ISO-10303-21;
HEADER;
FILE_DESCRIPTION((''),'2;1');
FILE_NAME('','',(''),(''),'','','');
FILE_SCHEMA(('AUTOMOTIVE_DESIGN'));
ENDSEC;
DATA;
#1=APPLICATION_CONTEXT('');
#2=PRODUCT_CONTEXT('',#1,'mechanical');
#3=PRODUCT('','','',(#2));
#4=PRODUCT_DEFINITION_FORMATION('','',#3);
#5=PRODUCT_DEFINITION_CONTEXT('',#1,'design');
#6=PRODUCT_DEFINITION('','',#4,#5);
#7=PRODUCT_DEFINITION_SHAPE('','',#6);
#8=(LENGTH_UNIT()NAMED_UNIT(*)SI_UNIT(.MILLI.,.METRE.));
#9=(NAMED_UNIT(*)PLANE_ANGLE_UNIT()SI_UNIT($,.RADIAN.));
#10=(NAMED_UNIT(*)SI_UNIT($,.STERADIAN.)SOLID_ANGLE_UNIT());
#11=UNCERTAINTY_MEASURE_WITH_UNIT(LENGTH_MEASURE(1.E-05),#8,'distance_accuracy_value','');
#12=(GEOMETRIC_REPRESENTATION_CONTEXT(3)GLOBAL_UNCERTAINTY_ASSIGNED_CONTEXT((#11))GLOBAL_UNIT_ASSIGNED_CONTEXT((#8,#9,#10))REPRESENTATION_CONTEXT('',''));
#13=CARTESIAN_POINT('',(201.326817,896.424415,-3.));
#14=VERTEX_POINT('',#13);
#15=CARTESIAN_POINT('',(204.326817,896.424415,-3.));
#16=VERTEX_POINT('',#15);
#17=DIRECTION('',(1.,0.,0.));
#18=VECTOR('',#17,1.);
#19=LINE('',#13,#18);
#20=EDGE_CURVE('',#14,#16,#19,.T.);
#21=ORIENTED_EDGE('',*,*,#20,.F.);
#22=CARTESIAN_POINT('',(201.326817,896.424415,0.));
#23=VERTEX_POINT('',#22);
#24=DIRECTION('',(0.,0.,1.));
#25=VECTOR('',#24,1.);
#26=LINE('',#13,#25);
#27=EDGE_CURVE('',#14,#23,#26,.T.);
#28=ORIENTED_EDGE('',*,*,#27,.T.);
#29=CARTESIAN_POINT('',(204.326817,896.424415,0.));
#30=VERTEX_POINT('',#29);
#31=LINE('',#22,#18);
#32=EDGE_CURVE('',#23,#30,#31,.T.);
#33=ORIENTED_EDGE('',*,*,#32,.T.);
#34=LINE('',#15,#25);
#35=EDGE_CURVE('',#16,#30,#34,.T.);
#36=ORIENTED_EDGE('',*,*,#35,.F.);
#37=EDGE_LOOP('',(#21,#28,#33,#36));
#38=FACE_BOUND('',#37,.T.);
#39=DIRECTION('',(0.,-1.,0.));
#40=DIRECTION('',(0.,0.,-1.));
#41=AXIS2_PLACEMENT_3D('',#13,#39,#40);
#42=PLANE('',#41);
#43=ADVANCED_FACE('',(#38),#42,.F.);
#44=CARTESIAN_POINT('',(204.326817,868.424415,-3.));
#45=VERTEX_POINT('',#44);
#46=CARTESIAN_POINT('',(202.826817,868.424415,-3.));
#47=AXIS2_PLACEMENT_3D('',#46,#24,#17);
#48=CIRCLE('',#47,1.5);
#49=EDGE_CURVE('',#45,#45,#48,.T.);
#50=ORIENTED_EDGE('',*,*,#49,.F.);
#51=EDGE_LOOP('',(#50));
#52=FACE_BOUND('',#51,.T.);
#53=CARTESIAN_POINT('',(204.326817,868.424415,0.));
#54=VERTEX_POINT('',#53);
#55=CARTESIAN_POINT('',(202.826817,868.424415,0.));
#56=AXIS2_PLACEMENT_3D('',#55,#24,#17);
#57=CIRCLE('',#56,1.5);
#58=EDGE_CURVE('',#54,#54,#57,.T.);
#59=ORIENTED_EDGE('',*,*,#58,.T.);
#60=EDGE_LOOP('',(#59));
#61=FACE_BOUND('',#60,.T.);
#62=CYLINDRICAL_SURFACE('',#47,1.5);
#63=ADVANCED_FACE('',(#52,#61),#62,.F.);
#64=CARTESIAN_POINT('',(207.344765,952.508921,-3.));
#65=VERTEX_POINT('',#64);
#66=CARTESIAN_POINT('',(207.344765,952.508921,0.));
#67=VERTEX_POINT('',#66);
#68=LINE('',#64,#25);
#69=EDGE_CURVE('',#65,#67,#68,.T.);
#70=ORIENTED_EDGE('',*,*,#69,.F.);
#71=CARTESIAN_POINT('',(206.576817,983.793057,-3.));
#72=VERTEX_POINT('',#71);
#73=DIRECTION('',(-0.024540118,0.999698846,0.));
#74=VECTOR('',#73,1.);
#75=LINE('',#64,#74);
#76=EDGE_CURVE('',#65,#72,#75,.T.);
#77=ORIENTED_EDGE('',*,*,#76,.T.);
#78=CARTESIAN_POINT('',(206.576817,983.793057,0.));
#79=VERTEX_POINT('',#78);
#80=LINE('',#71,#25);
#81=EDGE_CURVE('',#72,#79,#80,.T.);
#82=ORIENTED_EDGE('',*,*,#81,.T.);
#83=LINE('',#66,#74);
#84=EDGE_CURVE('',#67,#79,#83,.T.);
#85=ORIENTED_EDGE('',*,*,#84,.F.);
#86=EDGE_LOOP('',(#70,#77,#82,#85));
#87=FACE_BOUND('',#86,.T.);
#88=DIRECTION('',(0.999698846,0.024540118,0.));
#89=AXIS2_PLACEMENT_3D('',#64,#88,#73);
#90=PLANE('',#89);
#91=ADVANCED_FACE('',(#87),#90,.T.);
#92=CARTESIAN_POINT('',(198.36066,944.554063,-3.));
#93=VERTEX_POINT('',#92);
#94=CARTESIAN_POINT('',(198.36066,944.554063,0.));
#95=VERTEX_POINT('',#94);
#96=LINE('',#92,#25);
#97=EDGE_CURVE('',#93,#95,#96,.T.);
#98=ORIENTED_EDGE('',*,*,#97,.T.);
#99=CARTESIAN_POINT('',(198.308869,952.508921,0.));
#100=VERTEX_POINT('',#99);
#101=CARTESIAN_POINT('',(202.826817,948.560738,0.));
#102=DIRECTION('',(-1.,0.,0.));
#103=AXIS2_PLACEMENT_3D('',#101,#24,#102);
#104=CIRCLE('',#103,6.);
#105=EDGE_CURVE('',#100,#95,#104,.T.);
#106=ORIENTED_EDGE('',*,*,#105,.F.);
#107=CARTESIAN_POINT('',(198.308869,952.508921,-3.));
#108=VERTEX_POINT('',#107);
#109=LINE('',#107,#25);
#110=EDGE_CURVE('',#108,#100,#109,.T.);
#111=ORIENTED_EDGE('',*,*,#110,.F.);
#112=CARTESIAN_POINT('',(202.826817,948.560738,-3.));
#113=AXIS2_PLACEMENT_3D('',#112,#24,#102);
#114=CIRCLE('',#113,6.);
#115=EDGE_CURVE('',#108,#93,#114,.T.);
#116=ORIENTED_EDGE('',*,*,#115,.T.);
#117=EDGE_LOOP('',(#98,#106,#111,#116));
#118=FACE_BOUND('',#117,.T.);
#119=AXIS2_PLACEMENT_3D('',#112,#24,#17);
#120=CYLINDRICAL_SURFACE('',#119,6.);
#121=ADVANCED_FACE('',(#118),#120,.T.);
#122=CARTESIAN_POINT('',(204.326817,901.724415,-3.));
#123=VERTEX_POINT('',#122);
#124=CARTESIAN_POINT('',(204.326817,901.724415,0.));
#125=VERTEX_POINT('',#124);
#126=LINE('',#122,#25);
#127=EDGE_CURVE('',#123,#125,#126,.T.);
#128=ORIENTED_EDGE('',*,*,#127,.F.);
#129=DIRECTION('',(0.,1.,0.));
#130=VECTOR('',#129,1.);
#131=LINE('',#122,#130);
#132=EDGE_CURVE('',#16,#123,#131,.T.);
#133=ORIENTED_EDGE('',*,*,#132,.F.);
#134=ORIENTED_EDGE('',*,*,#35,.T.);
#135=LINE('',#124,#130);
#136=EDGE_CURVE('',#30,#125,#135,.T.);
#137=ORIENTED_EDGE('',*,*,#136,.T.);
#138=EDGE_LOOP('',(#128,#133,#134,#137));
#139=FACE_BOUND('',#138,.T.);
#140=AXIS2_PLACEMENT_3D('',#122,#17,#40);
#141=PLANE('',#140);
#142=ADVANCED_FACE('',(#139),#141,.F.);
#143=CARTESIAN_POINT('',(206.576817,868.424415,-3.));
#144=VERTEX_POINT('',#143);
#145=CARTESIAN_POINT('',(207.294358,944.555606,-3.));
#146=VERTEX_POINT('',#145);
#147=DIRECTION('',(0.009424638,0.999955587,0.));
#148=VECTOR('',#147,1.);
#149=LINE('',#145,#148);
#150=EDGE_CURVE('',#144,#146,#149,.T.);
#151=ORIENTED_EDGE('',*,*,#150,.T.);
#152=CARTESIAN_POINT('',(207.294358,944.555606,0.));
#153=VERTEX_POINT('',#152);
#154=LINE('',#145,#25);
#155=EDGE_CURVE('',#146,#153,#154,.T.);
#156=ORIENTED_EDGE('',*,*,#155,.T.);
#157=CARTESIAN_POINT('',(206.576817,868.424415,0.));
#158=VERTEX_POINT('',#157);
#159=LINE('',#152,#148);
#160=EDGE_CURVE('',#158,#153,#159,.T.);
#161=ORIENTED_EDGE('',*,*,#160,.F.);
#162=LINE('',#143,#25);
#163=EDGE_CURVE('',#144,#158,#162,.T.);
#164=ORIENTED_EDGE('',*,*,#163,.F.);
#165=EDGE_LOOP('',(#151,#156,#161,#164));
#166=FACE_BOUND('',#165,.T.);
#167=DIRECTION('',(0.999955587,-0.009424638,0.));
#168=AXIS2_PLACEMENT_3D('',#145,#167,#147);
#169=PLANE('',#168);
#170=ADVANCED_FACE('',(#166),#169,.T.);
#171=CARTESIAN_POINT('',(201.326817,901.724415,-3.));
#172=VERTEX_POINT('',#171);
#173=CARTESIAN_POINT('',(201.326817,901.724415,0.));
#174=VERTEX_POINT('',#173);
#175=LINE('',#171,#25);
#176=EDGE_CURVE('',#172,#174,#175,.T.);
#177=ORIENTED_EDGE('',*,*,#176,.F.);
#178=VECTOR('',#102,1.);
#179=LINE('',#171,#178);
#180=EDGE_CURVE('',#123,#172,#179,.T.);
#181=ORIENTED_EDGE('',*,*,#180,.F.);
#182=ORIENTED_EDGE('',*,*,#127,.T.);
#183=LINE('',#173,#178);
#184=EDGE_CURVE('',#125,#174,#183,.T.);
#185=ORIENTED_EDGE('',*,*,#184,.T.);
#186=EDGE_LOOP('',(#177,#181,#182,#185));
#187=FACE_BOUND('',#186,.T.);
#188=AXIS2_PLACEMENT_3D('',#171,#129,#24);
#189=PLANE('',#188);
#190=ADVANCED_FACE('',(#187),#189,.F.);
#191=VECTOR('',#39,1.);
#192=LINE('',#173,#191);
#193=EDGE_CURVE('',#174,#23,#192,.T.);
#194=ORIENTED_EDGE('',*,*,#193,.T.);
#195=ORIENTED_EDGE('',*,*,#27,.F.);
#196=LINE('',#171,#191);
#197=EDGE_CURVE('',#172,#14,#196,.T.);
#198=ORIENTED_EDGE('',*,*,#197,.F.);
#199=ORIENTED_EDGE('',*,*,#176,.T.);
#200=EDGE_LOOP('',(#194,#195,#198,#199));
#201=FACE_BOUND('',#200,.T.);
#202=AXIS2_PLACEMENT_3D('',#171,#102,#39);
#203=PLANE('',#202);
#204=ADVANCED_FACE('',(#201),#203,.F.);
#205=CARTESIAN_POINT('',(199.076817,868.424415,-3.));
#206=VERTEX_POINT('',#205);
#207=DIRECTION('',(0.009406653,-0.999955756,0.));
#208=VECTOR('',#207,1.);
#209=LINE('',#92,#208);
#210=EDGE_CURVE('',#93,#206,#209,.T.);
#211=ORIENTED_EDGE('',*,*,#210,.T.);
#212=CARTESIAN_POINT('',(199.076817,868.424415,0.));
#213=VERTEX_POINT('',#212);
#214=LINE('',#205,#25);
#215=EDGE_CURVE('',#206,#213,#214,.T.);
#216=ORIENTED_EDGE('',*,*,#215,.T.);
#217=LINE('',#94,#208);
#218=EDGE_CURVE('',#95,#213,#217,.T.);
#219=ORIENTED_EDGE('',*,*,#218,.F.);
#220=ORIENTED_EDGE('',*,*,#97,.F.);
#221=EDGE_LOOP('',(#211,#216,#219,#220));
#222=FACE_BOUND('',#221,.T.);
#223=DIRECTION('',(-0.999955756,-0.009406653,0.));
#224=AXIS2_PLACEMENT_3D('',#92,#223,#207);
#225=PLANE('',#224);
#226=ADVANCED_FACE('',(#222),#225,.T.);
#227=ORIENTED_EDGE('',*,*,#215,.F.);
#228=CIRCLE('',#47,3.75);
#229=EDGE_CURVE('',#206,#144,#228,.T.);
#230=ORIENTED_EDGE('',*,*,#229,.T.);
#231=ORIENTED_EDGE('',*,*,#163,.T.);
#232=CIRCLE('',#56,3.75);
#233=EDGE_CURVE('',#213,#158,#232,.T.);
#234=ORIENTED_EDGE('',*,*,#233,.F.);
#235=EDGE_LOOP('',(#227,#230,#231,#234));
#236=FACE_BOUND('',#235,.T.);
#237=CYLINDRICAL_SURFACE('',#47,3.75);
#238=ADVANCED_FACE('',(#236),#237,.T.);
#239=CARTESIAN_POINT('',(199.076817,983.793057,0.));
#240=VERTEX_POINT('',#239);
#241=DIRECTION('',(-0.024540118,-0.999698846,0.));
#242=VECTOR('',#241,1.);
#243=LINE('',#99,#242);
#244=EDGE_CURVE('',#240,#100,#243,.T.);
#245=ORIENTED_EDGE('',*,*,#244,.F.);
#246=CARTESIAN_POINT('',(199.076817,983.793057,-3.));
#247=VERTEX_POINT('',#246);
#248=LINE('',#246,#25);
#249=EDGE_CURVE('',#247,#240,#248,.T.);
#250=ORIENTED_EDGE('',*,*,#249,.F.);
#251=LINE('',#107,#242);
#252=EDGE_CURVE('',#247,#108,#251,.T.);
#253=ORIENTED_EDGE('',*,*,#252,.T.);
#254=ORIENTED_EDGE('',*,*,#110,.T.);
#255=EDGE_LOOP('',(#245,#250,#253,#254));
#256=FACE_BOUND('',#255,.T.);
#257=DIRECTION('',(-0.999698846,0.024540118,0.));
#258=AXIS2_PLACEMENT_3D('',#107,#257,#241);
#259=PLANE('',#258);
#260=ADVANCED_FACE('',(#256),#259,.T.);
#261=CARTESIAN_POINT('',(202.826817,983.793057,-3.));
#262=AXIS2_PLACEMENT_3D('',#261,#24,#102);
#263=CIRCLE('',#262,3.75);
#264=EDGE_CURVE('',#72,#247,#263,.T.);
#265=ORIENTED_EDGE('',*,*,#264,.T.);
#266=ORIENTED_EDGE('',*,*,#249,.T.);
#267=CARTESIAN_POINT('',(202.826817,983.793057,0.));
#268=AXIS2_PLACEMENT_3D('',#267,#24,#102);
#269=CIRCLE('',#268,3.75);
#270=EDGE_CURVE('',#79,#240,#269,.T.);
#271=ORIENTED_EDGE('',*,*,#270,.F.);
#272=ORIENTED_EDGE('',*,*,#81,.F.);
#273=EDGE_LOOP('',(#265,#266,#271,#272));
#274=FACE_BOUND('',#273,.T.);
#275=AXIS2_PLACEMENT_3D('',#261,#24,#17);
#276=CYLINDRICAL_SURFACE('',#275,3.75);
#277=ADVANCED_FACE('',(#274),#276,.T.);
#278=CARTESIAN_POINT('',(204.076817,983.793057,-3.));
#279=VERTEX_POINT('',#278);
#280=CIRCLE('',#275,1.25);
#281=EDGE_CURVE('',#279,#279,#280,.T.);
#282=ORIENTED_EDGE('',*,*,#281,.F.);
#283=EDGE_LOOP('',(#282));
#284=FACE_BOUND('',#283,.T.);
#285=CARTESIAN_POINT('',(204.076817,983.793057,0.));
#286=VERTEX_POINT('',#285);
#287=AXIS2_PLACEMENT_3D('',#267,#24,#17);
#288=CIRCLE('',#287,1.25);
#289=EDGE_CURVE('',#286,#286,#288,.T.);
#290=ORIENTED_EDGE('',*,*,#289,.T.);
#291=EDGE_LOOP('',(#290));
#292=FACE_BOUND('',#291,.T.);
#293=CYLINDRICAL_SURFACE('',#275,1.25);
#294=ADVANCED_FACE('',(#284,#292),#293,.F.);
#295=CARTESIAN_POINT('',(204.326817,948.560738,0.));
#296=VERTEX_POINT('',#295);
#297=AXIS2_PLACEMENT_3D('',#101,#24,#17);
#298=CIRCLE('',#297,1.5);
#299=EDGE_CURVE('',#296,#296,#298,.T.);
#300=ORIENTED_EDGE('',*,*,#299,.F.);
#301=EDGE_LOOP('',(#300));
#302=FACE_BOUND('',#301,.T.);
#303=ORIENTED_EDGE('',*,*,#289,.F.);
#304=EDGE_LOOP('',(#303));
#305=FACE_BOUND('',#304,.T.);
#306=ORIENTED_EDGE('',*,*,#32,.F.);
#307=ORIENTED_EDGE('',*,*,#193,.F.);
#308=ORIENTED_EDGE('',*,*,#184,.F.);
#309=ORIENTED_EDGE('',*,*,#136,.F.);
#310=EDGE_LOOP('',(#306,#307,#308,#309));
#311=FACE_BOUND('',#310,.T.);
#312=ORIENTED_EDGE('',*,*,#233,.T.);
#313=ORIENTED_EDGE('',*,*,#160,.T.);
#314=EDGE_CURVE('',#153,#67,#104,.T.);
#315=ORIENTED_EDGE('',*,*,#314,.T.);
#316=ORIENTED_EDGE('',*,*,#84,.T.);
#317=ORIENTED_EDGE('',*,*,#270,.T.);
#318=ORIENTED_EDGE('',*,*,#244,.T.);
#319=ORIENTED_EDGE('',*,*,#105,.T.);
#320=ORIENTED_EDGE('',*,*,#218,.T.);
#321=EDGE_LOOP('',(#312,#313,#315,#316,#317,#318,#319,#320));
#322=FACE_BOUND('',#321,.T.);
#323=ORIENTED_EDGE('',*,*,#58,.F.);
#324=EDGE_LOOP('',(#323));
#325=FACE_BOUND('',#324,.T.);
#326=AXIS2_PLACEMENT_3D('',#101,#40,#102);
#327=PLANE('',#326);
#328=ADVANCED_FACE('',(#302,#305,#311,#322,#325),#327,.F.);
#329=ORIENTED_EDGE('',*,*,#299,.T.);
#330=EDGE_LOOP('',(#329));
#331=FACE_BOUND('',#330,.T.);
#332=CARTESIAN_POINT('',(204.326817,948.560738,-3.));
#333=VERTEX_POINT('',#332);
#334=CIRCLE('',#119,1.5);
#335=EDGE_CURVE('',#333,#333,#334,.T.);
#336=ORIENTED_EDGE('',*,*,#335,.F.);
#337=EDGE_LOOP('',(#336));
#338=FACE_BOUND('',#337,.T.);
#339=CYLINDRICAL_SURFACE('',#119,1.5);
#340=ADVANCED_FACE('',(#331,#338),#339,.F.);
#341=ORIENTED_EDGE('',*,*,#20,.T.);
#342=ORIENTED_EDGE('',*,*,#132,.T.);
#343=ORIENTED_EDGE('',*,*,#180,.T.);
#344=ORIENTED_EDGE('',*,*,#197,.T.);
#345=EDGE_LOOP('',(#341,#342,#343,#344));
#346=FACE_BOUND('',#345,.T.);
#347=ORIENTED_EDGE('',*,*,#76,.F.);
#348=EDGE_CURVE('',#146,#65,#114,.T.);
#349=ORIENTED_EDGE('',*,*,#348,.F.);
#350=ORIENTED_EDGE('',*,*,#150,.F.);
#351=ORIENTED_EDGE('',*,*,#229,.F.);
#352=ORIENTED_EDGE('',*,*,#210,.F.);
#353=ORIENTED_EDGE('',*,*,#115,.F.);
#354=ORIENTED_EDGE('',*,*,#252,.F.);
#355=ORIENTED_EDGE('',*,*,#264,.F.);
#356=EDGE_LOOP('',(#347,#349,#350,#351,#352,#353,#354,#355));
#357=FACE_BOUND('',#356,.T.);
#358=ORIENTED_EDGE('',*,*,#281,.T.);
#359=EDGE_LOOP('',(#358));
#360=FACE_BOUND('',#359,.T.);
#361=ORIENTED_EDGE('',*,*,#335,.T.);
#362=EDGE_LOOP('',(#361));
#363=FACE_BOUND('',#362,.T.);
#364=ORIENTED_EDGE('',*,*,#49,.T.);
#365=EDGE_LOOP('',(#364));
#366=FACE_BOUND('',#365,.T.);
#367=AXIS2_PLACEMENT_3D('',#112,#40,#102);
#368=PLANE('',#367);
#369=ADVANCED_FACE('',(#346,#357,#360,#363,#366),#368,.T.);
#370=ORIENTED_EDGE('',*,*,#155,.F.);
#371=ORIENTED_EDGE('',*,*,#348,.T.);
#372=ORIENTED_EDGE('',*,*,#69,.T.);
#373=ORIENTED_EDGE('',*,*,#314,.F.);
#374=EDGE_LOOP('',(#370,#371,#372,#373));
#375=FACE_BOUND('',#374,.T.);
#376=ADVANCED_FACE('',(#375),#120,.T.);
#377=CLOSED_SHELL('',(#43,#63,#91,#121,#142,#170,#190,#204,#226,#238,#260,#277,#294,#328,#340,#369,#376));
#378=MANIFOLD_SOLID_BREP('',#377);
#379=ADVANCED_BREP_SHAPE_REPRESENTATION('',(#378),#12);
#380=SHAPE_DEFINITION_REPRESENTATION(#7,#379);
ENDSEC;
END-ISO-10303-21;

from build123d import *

# Parameters (mm, degrees)
ESQUISSE1_R               = 1.25
ESQUISSE1_R_2             = 1.5
ESQUISSE1_W               = 3
ESQUISSE1_H               = 5.3
T_LE_DE_BASE_PLI_E1_DEPTH = 3


# Sheet-metal steps are written as plain solids
with BuildPart() as part:
    # Esquisse1 → Tôle de base pliée1 (new body)
    with BuildSketch(Plane.XY):
        with BuildLine():
            Line((198.308869227, 952.508921018), (199.076816888, 983.793056947))
            ThreePointArc((199.076816888, 983.793056947), (202.826816888, 987.543056947), (206.576816888, 983.793056947))
            Line((206.576816888, 983.793056947), (207.344764549, 952.508921018))
            ThreePointArc((207.344764549, 952.508921018), (208.826696387, 948.522711746), (207.294357708, 944.555606441))
            Line((207.294357708, 944.555606441), (206.576816888, 868.424415079))
            ThreePointArc((206.576816888, 868.424415079), (202.826816888, 864.674415079), (199.076816888, 868.424415079))
            Line((199.076816888, 868.424415079), (198.360659982, 944.554063284))
            ThreePointArc((198.360659982, 944.554063284), (196.826944047, 948.521675361), (198.308869227, 952.508921018))
        make_face()
        with Locations((202.826816888, 983.793056947)):
            Circle(ESQUISSE1_R, mode=Mode.SUBTRACT)
        with Locations((202.826816888, 948.560738026)):
            Circle(ESQUISSE1_R_2, mode=Mode.SUBTRACT)
        with Locations((202.826816888, 868.424415079)):
            Circle(ESQUISSE1_R_2, mode=Mode.SUBTRACT)
        with Locations((202.826816888, 899.074415079)):
            Rectangle(ESQUISSE1_W, ESQUISSE1_H, mode=Mode.SUBTRACT)
    extrude(amount=-T_LE_DE_BASE_PLI_E1_DEPTH)


solid = part.part
